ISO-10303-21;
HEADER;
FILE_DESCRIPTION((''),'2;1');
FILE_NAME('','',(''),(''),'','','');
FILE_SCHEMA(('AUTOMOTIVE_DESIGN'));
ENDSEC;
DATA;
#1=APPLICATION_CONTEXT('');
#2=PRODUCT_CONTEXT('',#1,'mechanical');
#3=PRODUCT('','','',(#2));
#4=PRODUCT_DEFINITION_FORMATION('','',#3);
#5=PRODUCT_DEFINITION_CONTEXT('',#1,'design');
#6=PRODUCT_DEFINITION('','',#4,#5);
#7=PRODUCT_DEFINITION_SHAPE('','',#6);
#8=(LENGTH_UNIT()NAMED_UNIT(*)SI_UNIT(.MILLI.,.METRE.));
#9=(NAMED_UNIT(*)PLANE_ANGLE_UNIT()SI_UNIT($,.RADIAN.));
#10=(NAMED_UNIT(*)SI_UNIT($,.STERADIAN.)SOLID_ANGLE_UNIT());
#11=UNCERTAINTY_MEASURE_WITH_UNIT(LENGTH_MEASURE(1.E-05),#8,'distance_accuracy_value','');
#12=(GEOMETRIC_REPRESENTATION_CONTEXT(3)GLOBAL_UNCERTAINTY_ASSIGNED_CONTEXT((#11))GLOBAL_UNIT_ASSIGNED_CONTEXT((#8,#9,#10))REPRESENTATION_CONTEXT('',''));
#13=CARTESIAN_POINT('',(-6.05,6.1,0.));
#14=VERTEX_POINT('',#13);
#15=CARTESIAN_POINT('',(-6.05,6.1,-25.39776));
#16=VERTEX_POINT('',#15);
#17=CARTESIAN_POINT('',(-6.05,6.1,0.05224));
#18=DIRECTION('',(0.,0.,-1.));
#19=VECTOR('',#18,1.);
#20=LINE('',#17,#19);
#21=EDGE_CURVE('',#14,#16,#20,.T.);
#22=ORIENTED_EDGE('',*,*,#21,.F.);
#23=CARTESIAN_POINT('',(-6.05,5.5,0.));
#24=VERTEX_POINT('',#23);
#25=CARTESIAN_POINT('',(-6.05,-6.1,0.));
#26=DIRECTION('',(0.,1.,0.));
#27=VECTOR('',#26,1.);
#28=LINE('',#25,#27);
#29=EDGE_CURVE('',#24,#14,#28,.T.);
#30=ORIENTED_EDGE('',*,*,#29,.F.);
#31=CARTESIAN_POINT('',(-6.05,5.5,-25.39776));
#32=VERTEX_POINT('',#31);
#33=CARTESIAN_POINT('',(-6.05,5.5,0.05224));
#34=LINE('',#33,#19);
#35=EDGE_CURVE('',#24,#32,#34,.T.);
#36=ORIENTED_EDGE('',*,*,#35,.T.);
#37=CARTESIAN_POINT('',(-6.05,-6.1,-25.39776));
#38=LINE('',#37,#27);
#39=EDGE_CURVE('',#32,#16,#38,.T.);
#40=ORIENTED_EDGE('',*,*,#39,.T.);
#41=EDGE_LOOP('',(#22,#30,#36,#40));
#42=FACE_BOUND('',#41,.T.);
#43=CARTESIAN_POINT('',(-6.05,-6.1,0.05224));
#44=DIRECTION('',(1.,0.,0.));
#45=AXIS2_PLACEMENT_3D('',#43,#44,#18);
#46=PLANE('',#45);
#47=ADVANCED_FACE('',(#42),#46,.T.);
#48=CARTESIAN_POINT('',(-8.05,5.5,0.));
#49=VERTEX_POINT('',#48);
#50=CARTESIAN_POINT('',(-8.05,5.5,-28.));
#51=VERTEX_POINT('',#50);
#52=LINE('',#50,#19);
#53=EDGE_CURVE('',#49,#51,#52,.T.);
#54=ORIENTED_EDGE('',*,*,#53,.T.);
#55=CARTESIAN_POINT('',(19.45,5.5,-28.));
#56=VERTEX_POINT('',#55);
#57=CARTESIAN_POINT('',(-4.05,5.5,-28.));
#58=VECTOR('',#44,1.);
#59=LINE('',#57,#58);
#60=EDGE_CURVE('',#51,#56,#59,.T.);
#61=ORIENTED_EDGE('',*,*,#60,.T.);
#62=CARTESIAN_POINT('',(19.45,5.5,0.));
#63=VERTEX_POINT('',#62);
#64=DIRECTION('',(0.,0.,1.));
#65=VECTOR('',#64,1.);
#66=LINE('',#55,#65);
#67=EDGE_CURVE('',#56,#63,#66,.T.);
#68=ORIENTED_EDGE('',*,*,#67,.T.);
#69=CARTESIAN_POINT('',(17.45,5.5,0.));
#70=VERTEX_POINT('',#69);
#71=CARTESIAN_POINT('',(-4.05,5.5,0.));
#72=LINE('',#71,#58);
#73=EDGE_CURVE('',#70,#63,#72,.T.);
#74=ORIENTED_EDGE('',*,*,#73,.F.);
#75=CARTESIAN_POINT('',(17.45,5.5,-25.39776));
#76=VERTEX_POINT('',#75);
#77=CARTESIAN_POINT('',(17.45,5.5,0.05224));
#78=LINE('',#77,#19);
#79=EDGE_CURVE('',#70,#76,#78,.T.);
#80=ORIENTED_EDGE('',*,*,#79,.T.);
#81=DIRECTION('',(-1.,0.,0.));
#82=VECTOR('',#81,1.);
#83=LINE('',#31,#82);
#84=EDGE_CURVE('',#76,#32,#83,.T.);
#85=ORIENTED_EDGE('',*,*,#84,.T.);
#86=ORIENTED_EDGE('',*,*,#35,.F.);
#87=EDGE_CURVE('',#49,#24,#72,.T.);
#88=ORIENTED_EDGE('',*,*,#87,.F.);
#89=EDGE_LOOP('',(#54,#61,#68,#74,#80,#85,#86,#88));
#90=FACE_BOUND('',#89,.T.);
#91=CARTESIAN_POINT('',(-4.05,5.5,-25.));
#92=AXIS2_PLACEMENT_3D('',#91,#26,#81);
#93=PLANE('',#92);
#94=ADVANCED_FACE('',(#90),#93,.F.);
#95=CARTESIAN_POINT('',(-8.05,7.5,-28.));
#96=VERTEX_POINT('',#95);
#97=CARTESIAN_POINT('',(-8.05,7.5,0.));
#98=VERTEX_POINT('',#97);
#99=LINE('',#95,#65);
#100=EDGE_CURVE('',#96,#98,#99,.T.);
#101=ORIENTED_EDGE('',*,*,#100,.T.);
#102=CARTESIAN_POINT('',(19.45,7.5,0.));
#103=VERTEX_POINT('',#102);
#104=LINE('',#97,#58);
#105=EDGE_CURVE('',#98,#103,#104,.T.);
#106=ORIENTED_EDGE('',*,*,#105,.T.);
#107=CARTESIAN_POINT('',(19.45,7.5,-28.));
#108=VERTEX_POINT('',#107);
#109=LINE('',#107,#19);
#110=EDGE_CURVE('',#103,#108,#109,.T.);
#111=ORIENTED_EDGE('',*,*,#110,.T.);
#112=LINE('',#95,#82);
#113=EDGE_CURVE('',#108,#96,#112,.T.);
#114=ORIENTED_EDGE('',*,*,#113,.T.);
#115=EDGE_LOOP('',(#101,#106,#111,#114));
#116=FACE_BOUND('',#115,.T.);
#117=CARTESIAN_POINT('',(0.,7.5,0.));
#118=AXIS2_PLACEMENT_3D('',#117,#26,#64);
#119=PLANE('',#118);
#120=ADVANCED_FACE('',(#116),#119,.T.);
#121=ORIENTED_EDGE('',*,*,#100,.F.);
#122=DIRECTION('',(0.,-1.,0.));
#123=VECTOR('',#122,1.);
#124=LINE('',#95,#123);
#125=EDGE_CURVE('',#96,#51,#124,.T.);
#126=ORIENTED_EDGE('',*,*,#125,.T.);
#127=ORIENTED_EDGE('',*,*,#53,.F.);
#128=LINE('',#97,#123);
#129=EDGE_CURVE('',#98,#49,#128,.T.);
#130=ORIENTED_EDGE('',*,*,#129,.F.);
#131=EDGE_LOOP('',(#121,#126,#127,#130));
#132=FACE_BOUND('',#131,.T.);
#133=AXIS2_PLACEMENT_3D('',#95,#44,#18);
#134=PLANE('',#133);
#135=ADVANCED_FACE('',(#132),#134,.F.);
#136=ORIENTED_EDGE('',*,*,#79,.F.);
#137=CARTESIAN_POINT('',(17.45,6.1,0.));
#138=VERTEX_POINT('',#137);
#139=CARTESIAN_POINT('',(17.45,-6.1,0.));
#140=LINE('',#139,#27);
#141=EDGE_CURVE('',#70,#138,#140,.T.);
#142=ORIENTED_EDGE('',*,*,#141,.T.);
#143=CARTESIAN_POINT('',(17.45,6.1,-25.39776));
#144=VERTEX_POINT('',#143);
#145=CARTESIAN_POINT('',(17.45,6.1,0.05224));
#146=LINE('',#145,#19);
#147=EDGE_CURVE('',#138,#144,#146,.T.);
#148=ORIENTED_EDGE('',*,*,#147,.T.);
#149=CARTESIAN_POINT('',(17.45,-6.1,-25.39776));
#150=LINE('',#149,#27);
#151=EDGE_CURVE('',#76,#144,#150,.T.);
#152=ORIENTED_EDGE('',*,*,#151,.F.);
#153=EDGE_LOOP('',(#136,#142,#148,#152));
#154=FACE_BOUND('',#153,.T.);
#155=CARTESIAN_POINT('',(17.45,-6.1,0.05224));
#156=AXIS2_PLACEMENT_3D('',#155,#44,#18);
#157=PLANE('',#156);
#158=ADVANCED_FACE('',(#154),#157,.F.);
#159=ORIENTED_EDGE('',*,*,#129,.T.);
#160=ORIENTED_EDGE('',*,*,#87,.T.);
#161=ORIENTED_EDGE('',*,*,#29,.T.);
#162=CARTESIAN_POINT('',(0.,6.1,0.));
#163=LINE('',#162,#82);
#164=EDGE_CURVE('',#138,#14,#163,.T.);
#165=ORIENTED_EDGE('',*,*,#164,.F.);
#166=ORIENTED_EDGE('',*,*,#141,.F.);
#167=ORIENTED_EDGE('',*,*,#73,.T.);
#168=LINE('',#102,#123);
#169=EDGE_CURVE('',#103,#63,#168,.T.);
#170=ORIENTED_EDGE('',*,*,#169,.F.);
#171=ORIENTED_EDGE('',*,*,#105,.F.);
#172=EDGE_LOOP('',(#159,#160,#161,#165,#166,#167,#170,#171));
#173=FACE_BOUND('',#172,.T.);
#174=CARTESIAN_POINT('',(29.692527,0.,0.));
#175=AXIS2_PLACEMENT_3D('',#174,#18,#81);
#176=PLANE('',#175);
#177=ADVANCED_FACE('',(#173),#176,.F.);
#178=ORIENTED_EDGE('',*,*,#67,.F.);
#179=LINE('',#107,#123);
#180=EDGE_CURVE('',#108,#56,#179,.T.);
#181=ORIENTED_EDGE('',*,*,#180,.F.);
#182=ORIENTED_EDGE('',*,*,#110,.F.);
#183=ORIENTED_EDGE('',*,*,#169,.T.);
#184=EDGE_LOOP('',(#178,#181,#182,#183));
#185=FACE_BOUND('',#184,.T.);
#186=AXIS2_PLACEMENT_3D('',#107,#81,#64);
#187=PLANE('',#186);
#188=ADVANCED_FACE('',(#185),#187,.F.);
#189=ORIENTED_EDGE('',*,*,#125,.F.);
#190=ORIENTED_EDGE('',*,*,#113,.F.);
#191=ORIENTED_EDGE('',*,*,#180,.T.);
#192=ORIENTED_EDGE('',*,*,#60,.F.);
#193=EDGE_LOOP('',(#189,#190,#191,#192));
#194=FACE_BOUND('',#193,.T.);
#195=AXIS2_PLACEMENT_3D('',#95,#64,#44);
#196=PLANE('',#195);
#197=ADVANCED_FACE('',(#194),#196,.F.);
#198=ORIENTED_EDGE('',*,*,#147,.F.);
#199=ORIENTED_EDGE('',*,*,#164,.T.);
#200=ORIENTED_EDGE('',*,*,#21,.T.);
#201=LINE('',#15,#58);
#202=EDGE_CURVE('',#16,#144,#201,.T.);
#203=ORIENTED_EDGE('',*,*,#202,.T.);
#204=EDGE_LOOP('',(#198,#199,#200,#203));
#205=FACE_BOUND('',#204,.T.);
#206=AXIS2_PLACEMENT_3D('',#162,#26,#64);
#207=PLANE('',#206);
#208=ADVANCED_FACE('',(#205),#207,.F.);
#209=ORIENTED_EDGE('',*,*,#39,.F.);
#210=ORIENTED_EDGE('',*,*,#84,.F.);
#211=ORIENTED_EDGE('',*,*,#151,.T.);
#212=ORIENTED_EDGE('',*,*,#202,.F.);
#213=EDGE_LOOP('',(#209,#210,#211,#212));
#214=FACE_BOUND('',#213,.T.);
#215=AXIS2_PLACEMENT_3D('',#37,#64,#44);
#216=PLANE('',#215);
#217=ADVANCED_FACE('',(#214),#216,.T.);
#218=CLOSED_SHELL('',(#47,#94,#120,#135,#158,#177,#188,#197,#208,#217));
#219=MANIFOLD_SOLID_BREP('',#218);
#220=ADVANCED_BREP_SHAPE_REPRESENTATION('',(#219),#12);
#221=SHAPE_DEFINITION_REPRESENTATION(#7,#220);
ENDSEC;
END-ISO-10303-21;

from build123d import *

# Parameters (mm, degrees)
SKETCH1_R                                      = 29.692527183
SKETCH1_R_2                                    = 22.692527183
SKETCH1_R_3                                    = 19.692527183
SKETCH1_R_4                                    = 16.692527183
BOSS_EXTRUDE1_DEPTH                            = 5
SKETCH9_W                                      = 27.5
SKETCH9_H                                      = 28
BOSS_EXTRUDE2_DEPTH                            = 7.5
SKETCH10_W                                     = 23.5
SKETCH10_H                                     = 25.45
CUT_EXTRUDE1_DEPTH                             = 6.1
SKETCH12_W                                     = 12
SKETCH12_H                                     = 11
CUT_EXTRUDE2_DEPTH                             = 3
SKETCH11_W                                     = 13
SKETCH11_H                                     = 9.717675131
CUT_EXTRUDE3_DEPTH                             = 4.947760199
CSK_FOR_M3_FLAT_HEAD_MACHINE_SCREW1_AT_2_COUNT = 2
CSK_FOR_M3_FLAT_HEAD_MACHINE_SCREW1_AT_2_PITCH = 27.84943902
CSK_FOR_M3_FLAT_HEAD_MACHINE_SCREW1_AT_3_COUNT = 2
CSK_FOR_M3_FLAT_HEAD_MACHINE_SCREW1_AT_3_PITCH = 27.84943902
CSK_FOR_M3_FLAT_HEAD_MACHINE_SCREW1_AT_4_COUNT = 2
CSK_FOR_M3_FLAT_HEAD_MACHINE_SCREW1_AT_4_PITCH = 39.385054366
SPLIT1_START                                   = -28
SPLIT1_DEPTH                                   = 28
SPLIT1_2_OUTLINE_W                             = 23.5
SPLIT1_2_OUTLINE_H                             = 0.6
SPLIT1_2_DEPTH                                 = 2.602239801
SPLIT1_START_2                                 = 5.5
SPLIT1_3_OUTLINE_W                             = 27.5
SPLIT1_3_OUTLINE_H                             = 28
SPLIT1_3_DEPTH                                 = 2


# Read off the part's stored shape, not the designer's step: Split1
with BuildPart() as part:
    # Sketch1 → Boss-Extrude1 (new body)
    # profile 1 of 4: a face of its own
    with BuildSketch(Plane(origin=(0, 0, 0), x_dir=(-1, 0, 0), z_dir=(0, 0, 1))):
        with Locations(Location((0, 0, 0), (0, 0, 180))):
            Circle(SKETCH1_R)
        Circle(SKETCH1_R_2, mode=Mode.SUBTRACT)
    # profile 2 of 4: a face of its own
    with BuildSketch(Plane(origin=(0, 0, 0), x_dir=(-1, 0, 0), z_dir=(0, 0, 1))):
        Circle(SKETCH1_R_2)
        Circle(SKETCH1_R_3, mode=Mode.SUBTRACT)
    # profile 3 of 4: a face of its own
    with BuildSketch(Plane(origin=(0, 0, 0), x_dir=(-1, 0, 0), z_dir=(0, 0, 1))):
        Circle(SKETCH1_R_3)
        Circle(SKETCH1_R_4, mode=Mode.SUBTRACT)
    # profile 4 of 4: a face of its own
    with BuildSketch(Plane(origin=(0, 0, 0), x_dir=(-1, 0, 0), z_dir=(0, 0, 1))):
        with BuildLine():
            Line((14.058465911, 9), (-14.058465911, 9))
            ThreePointArc((-14.058465911, 9), (-16.692527183, 0), (-14.058465911, -9))
            Line((-14.058465911, -9), (14.058465911, -9))
            ThreePointArc((14.058465911, -9), (16.020483578, -4.688770595), (16.692527183, 0))
            ThreePointArc((16.692527183, 0), (16.020483578, 4.688770595), (14.058465911, 9))
        make_face()
    extrude(amount=BOSS_EXTRUDE1_DEPTH)

    # Sketch9 → Boss-Extrude2 (add, symmetric)
    with BuildSketch(Plane(origin=(0, 0, 0), x_dir=(1, 0, 0), z_dir=(0, 1, 0))):
        with Locations((5.7, 14)):
            Rectangle(SKETCH9_W, SKETCH9_H)
    extrude(amount=BOSS_EXTRUDE2_DEPTH, both=True)

    # Sketch10 → Cut-Extrude1 (cut, symmetric)
    with BuildSketch(Plane(origin=(0, 0, 0), x_dir=(1, 0, 0), z_dir=(0, 1, 0))):
        with Locations((5.7, 12.672760199)):
            Rectangle(SKETCH10_W, SKETCH10_H)
    extrude(amount=CUT_EXTRUDE1_DEPTH, both=True, mode=Mode.SUBTRACT)

    # Sketch12 → Cut-Extrude2 (cut)
    with BuildSketch(Plane.XY.offset(-28)):
        with Locations((1.95, 0)):
            Rectangle(SKETCH12_W, SKETCH12_H)
    extrude(amount=CUT_EXTRUDE2_DEPTH, mode=Mode.SUBTRACT)

    # Sketch11 → Cut-Extrude3 (cut)
    with BuildSketch(Plane.XY.offset(5)):
        with Locations((-1.55, -0.433824782)):
            Rectangle(SKETCH11_W, SKETCH11_H)
    extrude(amount=-CUT_EXTRUDE3_DEPTH, mode=Mode.SUBTRACT)

    # Sketch13 → CSK for M3 Flat Head Machine Screw1 (revolve, cut)
    with BuildSketch(Plane.YZ.offset(-19.692527183)):
        Polygon((0, 0), (0, 13.021463052), (1.7, 12), (1.7, 1.95), (3.65, 0), align=None)
    csk_for_m3_flat_head_machine_screw1 = revolve(axis=Axis((-19.692527183, 0, -6.35), (0, 0, 1)), mode=Mode.SUBTRACT)

    # CSK for M3 Flat Head Machine Screw1 at 2: CSK for M3 Flat Head Machine Screw1 ×2
    with Locations(*[Vector(0.7071067811865476, -0.7071067811865475, 0) * (i * CSK_FOR_M3_FLAT_HEAD_MACHINE_SCREW1_AT_2_PITCH) for i in range(1, CSK_FOR_M3_FLAT_HEAD_MACHINE_SCREW1_AT_2_COUNT)]):
        add(csk_for_m3_flat_head_machine_screw1, mode=Mode.SUBTRACT)

    # CSK for M3 Flat Head Machine Screw1 at 3: CSK for M3 Flat Head Machine Screw1 ×2
    with Locations(*[Vector(0.7071067811865476, 0.7071067811865475, 0) * (i * CSK_FOR_M3_FLAT_HEAD_MACHINE_SCREW1_AT_3_PITCH) for i in range(1, CSK_FOR_M3_FLAT_HEAD_MACHINE_SCREW1_AT_3_COUNT)]):
        add(csk_for_m3_flat_head_machine_screw1, mode=Mode.SUBTRACT)

    # CSK for M3 Flat Head Machine Screw1 at 4: CSK for M3 Flat Head Machine Screw1 ×2
    with Locations(*[(i * CSK_FOR_M3_FLAT_HEAD_MACHINE_SCREW1_AT_4_PITCH, 0, 0) for i in range(1, CSK_FOR_M3_FLAT_HEAD_MACHINE_SCREW1_AT_4_COUNT)]):
        add(csk_for_m3_flat_head_machine_screw1, mode=Mode.SUBTRACT)

    # Split1 3 outline → Split1 3 (cut)
    with BuildSketch(Plane(origin=(0, 0, 0), x_dir=(1, 0, 0), z_dir=(0, 1, 0)).offset(SPLIT1_START_2)):
        with Locations((5.7, 14)):
            Rectangle(SPLIT1_3_OUTLINE_W, SPLIT1_3_OUTLINE_H)
    extrude(amount=SPLIT1_3_DEPTH, mode=Mode.SUBTRACT)


with BuildPart() as body_2:
    # Split1 outline → Split1 (new body)
    with BuildSketch(Plane.XY.offset(SPLIT1_START)):
        Polygon((-8.05, 5.5), (-6.05, 5.5), (-6.05, 6.1), (17.45, 6.1), (17.45, 5.5), (19.45, 5.5), (19.45, 7.5), (-8.05, 7.5), align=None)
    extrude(amount=SPLIT1_DEPTH)

    # Split1 2 outline → Split1 2 (add)
    with BuildSketch(Plane.XY.offset(SPLIT1_START)):
        with Locations((5.7, 5.8)):
            Rectangle(SPLIT1_2_OUTLINE_W, SPLIT1_2_OUTLINE_H)
    extrude(amount=SPLIT1_2_DEPTH)


solid = body_2.part
